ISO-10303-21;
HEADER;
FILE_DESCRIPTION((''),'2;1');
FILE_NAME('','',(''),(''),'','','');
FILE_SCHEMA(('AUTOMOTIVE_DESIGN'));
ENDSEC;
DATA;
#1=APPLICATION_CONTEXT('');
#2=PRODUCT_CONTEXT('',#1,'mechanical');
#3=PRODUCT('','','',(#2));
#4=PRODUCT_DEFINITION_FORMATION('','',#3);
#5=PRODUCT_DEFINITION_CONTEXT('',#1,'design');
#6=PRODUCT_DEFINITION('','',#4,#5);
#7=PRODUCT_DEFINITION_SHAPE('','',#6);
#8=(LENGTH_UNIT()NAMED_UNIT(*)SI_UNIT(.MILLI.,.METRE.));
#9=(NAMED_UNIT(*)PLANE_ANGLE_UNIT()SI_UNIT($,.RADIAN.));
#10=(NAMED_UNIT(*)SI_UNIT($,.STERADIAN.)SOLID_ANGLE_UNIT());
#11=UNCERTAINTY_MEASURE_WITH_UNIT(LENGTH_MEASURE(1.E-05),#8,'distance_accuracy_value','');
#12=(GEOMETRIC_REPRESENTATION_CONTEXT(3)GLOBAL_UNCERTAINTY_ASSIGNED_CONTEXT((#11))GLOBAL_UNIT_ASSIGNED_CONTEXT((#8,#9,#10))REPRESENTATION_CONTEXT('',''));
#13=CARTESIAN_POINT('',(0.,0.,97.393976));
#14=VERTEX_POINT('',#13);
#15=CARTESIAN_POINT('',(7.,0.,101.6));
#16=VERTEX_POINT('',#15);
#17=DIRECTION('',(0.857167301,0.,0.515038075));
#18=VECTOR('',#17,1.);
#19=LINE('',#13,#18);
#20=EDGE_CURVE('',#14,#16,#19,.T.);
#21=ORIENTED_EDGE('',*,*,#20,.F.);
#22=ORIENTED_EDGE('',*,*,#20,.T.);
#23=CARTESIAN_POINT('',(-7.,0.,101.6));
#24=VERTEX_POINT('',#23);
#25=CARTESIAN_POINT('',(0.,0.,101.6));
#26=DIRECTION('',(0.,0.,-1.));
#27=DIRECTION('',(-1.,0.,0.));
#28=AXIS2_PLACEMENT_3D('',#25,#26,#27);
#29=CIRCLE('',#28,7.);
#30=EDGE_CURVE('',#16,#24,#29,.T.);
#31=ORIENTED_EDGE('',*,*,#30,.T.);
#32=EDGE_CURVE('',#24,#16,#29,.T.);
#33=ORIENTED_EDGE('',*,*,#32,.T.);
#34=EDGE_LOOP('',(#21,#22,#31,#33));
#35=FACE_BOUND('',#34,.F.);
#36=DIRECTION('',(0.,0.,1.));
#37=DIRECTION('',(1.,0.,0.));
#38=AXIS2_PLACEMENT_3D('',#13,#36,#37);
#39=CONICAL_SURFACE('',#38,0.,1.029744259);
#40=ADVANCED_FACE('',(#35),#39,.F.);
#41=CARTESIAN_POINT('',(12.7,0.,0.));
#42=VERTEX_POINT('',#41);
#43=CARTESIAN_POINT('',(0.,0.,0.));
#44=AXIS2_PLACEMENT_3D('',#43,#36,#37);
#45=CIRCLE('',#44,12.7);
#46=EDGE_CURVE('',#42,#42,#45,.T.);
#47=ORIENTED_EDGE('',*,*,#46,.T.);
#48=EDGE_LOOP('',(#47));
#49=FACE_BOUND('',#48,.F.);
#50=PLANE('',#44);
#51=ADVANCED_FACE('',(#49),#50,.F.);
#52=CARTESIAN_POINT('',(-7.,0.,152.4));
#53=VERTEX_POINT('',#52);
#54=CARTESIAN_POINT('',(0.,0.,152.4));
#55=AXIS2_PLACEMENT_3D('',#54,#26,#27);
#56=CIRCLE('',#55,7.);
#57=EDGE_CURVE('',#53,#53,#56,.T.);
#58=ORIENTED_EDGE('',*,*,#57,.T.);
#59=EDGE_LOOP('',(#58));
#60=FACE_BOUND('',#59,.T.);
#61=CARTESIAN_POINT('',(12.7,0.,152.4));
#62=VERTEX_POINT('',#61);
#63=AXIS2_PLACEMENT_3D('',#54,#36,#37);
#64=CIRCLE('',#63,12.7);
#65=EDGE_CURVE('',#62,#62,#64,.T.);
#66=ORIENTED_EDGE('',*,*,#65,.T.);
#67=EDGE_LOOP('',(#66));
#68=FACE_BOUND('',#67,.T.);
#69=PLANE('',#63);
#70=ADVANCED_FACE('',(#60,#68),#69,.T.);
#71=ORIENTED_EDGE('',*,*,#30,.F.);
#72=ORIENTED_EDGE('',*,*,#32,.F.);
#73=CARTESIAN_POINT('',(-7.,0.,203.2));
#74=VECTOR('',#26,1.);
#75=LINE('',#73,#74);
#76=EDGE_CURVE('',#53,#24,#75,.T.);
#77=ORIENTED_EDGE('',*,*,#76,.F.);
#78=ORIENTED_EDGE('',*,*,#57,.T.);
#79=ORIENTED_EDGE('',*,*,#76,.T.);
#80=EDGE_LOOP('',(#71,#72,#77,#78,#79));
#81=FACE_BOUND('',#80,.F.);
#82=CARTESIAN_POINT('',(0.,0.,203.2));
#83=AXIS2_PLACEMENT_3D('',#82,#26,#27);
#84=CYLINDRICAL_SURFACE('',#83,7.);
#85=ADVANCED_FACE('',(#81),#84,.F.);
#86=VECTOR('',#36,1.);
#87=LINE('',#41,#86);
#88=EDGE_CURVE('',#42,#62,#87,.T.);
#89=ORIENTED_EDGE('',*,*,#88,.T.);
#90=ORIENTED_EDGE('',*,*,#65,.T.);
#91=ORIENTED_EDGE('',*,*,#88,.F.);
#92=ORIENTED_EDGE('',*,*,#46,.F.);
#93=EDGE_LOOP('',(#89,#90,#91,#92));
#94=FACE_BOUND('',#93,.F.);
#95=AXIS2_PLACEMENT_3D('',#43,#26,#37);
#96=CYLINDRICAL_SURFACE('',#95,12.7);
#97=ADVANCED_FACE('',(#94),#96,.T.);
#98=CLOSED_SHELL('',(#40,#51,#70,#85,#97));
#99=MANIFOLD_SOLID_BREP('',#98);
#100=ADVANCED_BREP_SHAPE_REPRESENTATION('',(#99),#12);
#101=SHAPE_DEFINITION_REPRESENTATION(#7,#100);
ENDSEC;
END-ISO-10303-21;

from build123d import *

# Parameters (mm, degrees)
F0_R     = 12.7
F1_DEPTH = 152.4
F3_D     = 14
F3_DEPTH = 50.8
F3_TIP   = 4.2060243332


# Not quite as in the source:
# - a feature of the source that left no trace in its solid (it failed there, or was rolled back) is left out


with BuildPart() as f1:
    # F0 (on Top) → F1 (new body)
    with BuildSketch(Plane.XY):
        Circle(F0_R)
    extrude(amount=F1_DEPTH)

    # F3
    with Locations(Plane.XY.offset(152.4)):
        with Locations((0, 0)):
            Hole(F3_D / 2, depth=F3_DEPTH)
            with Locations((0, 0, -(F3_DEPTH + F3_TIP / 2))):  # 118° drill point
                Cone(0, F3_D / 2, F3_TIP, mode=Mode.SUBTRACT)


solid = f1.part
